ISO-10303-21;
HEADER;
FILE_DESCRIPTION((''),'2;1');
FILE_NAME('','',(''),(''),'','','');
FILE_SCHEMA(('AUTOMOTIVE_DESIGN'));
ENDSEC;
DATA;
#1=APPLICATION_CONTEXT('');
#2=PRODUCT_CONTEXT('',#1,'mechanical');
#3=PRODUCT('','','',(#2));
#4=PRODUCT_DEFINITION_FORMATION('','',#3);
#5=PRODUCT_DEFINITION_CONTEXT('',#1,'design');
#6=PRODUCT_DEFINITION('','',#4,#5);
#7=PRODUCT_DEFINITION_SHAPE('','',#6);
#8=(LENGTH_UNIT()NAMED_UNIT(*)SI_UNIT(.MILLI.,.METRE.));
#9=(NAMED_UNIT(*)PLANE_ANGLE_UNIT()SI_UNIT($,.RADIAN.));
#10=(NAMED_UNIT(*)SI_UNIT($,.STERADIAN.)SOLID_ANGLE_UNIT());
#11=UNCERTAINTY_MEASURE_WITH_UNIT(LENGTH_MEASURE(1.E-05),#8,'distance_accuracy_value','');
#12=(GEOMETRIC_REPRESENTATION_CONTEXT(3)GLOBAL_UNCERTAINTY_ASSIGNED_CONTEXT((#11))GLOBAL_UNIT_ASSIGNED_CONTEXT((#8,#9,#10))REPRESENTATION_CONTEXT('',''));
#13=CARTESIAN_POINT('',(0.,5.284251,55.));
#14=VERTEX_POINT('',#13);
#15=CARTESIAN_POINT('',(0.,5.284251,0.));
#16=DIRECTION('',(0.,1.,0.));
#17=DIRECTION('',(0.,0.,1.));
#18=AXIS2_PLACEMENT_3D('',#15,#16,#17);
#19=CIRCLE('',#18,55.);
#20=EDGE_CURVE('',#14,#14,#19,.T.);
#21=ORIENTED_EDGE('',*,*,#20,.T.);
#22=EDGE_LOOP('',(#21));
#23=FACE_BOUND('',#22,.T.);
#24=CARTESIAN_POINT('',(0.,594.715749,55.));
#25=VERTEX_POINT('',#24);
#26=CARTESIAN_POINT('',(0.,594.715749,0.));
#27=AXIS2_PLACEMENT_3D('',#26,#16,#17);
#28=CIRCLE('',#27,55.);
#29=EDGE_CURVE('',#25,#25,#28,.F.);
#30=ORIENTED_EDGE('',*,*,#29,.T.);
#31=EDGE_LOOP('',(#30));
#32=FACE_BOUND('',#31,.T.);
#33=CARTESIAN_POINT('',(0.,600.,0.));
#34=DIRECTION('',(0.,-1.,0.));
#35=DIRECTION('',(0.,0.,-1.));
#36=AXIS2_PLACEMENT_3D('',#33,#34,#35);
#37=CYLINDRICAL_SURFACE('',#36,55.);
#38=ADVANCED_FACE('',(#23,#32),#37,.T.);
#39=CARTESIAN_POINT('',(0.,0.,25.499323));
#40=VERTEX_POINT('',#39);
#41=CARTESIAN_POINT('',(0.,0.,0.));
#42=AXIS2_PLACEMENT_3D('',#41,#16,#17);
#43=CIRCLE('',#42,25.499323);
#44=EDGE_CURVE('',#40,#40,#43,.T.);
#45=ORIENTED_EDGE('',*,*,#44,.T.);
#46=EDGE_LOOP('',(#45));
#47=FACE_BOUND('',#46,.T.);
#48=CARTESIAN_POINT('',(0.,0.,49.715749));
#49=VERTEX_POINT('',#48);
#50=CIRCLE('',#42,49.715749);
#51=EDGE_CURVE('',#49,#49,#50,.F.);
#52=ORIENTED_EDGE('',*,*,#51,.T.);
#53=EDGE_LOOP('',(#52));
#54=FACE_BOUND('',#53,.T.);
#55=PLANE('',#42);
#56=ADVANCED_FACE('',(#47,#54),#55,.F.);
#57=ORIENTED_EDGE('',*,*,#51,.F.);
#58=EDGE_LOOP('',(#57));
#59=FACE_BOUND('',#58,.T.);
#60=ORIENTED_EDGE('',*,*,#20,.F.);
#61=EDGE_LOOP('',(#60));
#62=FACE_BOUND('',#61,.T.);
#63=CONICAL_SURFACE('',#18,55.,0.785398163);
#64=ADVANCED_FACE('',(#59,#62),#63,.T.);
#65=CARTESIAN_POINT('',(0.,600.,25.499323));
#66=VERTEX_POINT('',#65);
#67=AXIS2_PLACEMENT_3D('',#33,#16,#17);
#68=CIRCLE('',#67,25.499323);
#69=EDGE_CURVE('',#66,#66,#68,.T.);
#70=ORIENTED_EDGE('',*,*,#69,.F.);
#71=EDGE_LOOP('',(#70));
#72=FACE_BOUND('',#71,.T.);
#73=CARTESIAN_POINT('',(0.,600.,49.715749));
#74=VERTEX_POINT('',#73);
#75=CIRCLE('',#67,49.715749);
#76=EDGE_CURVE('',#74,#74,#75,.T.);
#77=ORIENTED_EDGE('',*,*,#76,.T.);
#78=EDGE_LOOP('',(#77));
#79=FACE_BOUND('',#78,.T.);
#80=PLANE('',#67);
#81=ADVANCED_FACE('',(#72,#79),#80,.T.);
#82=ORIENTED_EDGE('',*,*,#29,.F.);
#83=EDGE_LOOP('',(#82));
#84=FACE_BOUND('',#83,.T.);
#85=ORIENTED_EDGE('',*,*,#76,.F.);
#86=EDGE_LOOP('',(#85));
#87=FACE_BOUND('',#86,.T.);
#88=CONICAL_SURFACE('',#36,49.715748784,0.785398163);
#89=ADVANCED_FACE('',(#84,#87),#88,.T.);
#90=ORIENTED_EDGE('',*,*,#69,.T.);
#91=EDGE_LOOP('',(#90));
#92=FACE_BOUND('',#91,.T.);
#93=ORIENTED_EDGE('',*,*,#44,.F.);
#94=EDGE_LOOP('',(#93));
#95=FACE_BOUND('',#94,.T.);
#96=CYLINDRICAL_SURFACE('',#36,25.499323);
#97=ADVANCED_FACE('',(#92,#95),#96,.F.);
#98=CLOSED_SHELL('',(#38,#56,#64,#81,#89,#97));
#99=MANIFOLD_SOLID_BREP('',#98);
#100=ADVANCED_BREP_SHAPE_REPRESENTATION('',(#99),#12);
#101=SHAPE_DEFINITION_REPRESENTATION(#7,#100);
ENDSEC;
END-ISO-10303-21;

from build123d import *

# Parameters (mm, degrees)
SKETCH1_R           = 55
BOSS_EXTRUDE1_DEPTH = 600
SKETCH2_R           = 25.499323039
CUT_EXTRUDE1_DEPTH  = 606.020660804
CHAMFER1_SIZE       = 5.284251216


with BuildPart() as part:
    # Sketch1 → Boss-Extrude1 (new body)
    with BuildSketch(Plane(origin=(0, 0, 0), x_dir=(1, 0, 0), z_dir=(0, 1, 0))):
        Circle(SKETCH1_R)
    extrude(amount=BOSS_EXTRUDE1_DEPTH)

    # Sketch2 → Cut-Extrude1 (cut, through all)
    with BuildSketch(Plane(origin=(0, 0, 0), x_dir=(1, 0, 0), z_dir=(0, 1, 0))):
        Circle(SKETCH2_R)
    extrude(amount=CUT_EXTRUDE1_DEPTH, mode=Mode.SUBTRACT)

    # Chamfer1
    chamfer1_edges = [part.edges().sort_by_distance(p)[0] for p in [
        (-55, 600, 0),
        (-55, 0, 0),
    ]]
    chamfer(chamfer1_edges, length=CHAMFER1_SIZE)


solid = part.part
